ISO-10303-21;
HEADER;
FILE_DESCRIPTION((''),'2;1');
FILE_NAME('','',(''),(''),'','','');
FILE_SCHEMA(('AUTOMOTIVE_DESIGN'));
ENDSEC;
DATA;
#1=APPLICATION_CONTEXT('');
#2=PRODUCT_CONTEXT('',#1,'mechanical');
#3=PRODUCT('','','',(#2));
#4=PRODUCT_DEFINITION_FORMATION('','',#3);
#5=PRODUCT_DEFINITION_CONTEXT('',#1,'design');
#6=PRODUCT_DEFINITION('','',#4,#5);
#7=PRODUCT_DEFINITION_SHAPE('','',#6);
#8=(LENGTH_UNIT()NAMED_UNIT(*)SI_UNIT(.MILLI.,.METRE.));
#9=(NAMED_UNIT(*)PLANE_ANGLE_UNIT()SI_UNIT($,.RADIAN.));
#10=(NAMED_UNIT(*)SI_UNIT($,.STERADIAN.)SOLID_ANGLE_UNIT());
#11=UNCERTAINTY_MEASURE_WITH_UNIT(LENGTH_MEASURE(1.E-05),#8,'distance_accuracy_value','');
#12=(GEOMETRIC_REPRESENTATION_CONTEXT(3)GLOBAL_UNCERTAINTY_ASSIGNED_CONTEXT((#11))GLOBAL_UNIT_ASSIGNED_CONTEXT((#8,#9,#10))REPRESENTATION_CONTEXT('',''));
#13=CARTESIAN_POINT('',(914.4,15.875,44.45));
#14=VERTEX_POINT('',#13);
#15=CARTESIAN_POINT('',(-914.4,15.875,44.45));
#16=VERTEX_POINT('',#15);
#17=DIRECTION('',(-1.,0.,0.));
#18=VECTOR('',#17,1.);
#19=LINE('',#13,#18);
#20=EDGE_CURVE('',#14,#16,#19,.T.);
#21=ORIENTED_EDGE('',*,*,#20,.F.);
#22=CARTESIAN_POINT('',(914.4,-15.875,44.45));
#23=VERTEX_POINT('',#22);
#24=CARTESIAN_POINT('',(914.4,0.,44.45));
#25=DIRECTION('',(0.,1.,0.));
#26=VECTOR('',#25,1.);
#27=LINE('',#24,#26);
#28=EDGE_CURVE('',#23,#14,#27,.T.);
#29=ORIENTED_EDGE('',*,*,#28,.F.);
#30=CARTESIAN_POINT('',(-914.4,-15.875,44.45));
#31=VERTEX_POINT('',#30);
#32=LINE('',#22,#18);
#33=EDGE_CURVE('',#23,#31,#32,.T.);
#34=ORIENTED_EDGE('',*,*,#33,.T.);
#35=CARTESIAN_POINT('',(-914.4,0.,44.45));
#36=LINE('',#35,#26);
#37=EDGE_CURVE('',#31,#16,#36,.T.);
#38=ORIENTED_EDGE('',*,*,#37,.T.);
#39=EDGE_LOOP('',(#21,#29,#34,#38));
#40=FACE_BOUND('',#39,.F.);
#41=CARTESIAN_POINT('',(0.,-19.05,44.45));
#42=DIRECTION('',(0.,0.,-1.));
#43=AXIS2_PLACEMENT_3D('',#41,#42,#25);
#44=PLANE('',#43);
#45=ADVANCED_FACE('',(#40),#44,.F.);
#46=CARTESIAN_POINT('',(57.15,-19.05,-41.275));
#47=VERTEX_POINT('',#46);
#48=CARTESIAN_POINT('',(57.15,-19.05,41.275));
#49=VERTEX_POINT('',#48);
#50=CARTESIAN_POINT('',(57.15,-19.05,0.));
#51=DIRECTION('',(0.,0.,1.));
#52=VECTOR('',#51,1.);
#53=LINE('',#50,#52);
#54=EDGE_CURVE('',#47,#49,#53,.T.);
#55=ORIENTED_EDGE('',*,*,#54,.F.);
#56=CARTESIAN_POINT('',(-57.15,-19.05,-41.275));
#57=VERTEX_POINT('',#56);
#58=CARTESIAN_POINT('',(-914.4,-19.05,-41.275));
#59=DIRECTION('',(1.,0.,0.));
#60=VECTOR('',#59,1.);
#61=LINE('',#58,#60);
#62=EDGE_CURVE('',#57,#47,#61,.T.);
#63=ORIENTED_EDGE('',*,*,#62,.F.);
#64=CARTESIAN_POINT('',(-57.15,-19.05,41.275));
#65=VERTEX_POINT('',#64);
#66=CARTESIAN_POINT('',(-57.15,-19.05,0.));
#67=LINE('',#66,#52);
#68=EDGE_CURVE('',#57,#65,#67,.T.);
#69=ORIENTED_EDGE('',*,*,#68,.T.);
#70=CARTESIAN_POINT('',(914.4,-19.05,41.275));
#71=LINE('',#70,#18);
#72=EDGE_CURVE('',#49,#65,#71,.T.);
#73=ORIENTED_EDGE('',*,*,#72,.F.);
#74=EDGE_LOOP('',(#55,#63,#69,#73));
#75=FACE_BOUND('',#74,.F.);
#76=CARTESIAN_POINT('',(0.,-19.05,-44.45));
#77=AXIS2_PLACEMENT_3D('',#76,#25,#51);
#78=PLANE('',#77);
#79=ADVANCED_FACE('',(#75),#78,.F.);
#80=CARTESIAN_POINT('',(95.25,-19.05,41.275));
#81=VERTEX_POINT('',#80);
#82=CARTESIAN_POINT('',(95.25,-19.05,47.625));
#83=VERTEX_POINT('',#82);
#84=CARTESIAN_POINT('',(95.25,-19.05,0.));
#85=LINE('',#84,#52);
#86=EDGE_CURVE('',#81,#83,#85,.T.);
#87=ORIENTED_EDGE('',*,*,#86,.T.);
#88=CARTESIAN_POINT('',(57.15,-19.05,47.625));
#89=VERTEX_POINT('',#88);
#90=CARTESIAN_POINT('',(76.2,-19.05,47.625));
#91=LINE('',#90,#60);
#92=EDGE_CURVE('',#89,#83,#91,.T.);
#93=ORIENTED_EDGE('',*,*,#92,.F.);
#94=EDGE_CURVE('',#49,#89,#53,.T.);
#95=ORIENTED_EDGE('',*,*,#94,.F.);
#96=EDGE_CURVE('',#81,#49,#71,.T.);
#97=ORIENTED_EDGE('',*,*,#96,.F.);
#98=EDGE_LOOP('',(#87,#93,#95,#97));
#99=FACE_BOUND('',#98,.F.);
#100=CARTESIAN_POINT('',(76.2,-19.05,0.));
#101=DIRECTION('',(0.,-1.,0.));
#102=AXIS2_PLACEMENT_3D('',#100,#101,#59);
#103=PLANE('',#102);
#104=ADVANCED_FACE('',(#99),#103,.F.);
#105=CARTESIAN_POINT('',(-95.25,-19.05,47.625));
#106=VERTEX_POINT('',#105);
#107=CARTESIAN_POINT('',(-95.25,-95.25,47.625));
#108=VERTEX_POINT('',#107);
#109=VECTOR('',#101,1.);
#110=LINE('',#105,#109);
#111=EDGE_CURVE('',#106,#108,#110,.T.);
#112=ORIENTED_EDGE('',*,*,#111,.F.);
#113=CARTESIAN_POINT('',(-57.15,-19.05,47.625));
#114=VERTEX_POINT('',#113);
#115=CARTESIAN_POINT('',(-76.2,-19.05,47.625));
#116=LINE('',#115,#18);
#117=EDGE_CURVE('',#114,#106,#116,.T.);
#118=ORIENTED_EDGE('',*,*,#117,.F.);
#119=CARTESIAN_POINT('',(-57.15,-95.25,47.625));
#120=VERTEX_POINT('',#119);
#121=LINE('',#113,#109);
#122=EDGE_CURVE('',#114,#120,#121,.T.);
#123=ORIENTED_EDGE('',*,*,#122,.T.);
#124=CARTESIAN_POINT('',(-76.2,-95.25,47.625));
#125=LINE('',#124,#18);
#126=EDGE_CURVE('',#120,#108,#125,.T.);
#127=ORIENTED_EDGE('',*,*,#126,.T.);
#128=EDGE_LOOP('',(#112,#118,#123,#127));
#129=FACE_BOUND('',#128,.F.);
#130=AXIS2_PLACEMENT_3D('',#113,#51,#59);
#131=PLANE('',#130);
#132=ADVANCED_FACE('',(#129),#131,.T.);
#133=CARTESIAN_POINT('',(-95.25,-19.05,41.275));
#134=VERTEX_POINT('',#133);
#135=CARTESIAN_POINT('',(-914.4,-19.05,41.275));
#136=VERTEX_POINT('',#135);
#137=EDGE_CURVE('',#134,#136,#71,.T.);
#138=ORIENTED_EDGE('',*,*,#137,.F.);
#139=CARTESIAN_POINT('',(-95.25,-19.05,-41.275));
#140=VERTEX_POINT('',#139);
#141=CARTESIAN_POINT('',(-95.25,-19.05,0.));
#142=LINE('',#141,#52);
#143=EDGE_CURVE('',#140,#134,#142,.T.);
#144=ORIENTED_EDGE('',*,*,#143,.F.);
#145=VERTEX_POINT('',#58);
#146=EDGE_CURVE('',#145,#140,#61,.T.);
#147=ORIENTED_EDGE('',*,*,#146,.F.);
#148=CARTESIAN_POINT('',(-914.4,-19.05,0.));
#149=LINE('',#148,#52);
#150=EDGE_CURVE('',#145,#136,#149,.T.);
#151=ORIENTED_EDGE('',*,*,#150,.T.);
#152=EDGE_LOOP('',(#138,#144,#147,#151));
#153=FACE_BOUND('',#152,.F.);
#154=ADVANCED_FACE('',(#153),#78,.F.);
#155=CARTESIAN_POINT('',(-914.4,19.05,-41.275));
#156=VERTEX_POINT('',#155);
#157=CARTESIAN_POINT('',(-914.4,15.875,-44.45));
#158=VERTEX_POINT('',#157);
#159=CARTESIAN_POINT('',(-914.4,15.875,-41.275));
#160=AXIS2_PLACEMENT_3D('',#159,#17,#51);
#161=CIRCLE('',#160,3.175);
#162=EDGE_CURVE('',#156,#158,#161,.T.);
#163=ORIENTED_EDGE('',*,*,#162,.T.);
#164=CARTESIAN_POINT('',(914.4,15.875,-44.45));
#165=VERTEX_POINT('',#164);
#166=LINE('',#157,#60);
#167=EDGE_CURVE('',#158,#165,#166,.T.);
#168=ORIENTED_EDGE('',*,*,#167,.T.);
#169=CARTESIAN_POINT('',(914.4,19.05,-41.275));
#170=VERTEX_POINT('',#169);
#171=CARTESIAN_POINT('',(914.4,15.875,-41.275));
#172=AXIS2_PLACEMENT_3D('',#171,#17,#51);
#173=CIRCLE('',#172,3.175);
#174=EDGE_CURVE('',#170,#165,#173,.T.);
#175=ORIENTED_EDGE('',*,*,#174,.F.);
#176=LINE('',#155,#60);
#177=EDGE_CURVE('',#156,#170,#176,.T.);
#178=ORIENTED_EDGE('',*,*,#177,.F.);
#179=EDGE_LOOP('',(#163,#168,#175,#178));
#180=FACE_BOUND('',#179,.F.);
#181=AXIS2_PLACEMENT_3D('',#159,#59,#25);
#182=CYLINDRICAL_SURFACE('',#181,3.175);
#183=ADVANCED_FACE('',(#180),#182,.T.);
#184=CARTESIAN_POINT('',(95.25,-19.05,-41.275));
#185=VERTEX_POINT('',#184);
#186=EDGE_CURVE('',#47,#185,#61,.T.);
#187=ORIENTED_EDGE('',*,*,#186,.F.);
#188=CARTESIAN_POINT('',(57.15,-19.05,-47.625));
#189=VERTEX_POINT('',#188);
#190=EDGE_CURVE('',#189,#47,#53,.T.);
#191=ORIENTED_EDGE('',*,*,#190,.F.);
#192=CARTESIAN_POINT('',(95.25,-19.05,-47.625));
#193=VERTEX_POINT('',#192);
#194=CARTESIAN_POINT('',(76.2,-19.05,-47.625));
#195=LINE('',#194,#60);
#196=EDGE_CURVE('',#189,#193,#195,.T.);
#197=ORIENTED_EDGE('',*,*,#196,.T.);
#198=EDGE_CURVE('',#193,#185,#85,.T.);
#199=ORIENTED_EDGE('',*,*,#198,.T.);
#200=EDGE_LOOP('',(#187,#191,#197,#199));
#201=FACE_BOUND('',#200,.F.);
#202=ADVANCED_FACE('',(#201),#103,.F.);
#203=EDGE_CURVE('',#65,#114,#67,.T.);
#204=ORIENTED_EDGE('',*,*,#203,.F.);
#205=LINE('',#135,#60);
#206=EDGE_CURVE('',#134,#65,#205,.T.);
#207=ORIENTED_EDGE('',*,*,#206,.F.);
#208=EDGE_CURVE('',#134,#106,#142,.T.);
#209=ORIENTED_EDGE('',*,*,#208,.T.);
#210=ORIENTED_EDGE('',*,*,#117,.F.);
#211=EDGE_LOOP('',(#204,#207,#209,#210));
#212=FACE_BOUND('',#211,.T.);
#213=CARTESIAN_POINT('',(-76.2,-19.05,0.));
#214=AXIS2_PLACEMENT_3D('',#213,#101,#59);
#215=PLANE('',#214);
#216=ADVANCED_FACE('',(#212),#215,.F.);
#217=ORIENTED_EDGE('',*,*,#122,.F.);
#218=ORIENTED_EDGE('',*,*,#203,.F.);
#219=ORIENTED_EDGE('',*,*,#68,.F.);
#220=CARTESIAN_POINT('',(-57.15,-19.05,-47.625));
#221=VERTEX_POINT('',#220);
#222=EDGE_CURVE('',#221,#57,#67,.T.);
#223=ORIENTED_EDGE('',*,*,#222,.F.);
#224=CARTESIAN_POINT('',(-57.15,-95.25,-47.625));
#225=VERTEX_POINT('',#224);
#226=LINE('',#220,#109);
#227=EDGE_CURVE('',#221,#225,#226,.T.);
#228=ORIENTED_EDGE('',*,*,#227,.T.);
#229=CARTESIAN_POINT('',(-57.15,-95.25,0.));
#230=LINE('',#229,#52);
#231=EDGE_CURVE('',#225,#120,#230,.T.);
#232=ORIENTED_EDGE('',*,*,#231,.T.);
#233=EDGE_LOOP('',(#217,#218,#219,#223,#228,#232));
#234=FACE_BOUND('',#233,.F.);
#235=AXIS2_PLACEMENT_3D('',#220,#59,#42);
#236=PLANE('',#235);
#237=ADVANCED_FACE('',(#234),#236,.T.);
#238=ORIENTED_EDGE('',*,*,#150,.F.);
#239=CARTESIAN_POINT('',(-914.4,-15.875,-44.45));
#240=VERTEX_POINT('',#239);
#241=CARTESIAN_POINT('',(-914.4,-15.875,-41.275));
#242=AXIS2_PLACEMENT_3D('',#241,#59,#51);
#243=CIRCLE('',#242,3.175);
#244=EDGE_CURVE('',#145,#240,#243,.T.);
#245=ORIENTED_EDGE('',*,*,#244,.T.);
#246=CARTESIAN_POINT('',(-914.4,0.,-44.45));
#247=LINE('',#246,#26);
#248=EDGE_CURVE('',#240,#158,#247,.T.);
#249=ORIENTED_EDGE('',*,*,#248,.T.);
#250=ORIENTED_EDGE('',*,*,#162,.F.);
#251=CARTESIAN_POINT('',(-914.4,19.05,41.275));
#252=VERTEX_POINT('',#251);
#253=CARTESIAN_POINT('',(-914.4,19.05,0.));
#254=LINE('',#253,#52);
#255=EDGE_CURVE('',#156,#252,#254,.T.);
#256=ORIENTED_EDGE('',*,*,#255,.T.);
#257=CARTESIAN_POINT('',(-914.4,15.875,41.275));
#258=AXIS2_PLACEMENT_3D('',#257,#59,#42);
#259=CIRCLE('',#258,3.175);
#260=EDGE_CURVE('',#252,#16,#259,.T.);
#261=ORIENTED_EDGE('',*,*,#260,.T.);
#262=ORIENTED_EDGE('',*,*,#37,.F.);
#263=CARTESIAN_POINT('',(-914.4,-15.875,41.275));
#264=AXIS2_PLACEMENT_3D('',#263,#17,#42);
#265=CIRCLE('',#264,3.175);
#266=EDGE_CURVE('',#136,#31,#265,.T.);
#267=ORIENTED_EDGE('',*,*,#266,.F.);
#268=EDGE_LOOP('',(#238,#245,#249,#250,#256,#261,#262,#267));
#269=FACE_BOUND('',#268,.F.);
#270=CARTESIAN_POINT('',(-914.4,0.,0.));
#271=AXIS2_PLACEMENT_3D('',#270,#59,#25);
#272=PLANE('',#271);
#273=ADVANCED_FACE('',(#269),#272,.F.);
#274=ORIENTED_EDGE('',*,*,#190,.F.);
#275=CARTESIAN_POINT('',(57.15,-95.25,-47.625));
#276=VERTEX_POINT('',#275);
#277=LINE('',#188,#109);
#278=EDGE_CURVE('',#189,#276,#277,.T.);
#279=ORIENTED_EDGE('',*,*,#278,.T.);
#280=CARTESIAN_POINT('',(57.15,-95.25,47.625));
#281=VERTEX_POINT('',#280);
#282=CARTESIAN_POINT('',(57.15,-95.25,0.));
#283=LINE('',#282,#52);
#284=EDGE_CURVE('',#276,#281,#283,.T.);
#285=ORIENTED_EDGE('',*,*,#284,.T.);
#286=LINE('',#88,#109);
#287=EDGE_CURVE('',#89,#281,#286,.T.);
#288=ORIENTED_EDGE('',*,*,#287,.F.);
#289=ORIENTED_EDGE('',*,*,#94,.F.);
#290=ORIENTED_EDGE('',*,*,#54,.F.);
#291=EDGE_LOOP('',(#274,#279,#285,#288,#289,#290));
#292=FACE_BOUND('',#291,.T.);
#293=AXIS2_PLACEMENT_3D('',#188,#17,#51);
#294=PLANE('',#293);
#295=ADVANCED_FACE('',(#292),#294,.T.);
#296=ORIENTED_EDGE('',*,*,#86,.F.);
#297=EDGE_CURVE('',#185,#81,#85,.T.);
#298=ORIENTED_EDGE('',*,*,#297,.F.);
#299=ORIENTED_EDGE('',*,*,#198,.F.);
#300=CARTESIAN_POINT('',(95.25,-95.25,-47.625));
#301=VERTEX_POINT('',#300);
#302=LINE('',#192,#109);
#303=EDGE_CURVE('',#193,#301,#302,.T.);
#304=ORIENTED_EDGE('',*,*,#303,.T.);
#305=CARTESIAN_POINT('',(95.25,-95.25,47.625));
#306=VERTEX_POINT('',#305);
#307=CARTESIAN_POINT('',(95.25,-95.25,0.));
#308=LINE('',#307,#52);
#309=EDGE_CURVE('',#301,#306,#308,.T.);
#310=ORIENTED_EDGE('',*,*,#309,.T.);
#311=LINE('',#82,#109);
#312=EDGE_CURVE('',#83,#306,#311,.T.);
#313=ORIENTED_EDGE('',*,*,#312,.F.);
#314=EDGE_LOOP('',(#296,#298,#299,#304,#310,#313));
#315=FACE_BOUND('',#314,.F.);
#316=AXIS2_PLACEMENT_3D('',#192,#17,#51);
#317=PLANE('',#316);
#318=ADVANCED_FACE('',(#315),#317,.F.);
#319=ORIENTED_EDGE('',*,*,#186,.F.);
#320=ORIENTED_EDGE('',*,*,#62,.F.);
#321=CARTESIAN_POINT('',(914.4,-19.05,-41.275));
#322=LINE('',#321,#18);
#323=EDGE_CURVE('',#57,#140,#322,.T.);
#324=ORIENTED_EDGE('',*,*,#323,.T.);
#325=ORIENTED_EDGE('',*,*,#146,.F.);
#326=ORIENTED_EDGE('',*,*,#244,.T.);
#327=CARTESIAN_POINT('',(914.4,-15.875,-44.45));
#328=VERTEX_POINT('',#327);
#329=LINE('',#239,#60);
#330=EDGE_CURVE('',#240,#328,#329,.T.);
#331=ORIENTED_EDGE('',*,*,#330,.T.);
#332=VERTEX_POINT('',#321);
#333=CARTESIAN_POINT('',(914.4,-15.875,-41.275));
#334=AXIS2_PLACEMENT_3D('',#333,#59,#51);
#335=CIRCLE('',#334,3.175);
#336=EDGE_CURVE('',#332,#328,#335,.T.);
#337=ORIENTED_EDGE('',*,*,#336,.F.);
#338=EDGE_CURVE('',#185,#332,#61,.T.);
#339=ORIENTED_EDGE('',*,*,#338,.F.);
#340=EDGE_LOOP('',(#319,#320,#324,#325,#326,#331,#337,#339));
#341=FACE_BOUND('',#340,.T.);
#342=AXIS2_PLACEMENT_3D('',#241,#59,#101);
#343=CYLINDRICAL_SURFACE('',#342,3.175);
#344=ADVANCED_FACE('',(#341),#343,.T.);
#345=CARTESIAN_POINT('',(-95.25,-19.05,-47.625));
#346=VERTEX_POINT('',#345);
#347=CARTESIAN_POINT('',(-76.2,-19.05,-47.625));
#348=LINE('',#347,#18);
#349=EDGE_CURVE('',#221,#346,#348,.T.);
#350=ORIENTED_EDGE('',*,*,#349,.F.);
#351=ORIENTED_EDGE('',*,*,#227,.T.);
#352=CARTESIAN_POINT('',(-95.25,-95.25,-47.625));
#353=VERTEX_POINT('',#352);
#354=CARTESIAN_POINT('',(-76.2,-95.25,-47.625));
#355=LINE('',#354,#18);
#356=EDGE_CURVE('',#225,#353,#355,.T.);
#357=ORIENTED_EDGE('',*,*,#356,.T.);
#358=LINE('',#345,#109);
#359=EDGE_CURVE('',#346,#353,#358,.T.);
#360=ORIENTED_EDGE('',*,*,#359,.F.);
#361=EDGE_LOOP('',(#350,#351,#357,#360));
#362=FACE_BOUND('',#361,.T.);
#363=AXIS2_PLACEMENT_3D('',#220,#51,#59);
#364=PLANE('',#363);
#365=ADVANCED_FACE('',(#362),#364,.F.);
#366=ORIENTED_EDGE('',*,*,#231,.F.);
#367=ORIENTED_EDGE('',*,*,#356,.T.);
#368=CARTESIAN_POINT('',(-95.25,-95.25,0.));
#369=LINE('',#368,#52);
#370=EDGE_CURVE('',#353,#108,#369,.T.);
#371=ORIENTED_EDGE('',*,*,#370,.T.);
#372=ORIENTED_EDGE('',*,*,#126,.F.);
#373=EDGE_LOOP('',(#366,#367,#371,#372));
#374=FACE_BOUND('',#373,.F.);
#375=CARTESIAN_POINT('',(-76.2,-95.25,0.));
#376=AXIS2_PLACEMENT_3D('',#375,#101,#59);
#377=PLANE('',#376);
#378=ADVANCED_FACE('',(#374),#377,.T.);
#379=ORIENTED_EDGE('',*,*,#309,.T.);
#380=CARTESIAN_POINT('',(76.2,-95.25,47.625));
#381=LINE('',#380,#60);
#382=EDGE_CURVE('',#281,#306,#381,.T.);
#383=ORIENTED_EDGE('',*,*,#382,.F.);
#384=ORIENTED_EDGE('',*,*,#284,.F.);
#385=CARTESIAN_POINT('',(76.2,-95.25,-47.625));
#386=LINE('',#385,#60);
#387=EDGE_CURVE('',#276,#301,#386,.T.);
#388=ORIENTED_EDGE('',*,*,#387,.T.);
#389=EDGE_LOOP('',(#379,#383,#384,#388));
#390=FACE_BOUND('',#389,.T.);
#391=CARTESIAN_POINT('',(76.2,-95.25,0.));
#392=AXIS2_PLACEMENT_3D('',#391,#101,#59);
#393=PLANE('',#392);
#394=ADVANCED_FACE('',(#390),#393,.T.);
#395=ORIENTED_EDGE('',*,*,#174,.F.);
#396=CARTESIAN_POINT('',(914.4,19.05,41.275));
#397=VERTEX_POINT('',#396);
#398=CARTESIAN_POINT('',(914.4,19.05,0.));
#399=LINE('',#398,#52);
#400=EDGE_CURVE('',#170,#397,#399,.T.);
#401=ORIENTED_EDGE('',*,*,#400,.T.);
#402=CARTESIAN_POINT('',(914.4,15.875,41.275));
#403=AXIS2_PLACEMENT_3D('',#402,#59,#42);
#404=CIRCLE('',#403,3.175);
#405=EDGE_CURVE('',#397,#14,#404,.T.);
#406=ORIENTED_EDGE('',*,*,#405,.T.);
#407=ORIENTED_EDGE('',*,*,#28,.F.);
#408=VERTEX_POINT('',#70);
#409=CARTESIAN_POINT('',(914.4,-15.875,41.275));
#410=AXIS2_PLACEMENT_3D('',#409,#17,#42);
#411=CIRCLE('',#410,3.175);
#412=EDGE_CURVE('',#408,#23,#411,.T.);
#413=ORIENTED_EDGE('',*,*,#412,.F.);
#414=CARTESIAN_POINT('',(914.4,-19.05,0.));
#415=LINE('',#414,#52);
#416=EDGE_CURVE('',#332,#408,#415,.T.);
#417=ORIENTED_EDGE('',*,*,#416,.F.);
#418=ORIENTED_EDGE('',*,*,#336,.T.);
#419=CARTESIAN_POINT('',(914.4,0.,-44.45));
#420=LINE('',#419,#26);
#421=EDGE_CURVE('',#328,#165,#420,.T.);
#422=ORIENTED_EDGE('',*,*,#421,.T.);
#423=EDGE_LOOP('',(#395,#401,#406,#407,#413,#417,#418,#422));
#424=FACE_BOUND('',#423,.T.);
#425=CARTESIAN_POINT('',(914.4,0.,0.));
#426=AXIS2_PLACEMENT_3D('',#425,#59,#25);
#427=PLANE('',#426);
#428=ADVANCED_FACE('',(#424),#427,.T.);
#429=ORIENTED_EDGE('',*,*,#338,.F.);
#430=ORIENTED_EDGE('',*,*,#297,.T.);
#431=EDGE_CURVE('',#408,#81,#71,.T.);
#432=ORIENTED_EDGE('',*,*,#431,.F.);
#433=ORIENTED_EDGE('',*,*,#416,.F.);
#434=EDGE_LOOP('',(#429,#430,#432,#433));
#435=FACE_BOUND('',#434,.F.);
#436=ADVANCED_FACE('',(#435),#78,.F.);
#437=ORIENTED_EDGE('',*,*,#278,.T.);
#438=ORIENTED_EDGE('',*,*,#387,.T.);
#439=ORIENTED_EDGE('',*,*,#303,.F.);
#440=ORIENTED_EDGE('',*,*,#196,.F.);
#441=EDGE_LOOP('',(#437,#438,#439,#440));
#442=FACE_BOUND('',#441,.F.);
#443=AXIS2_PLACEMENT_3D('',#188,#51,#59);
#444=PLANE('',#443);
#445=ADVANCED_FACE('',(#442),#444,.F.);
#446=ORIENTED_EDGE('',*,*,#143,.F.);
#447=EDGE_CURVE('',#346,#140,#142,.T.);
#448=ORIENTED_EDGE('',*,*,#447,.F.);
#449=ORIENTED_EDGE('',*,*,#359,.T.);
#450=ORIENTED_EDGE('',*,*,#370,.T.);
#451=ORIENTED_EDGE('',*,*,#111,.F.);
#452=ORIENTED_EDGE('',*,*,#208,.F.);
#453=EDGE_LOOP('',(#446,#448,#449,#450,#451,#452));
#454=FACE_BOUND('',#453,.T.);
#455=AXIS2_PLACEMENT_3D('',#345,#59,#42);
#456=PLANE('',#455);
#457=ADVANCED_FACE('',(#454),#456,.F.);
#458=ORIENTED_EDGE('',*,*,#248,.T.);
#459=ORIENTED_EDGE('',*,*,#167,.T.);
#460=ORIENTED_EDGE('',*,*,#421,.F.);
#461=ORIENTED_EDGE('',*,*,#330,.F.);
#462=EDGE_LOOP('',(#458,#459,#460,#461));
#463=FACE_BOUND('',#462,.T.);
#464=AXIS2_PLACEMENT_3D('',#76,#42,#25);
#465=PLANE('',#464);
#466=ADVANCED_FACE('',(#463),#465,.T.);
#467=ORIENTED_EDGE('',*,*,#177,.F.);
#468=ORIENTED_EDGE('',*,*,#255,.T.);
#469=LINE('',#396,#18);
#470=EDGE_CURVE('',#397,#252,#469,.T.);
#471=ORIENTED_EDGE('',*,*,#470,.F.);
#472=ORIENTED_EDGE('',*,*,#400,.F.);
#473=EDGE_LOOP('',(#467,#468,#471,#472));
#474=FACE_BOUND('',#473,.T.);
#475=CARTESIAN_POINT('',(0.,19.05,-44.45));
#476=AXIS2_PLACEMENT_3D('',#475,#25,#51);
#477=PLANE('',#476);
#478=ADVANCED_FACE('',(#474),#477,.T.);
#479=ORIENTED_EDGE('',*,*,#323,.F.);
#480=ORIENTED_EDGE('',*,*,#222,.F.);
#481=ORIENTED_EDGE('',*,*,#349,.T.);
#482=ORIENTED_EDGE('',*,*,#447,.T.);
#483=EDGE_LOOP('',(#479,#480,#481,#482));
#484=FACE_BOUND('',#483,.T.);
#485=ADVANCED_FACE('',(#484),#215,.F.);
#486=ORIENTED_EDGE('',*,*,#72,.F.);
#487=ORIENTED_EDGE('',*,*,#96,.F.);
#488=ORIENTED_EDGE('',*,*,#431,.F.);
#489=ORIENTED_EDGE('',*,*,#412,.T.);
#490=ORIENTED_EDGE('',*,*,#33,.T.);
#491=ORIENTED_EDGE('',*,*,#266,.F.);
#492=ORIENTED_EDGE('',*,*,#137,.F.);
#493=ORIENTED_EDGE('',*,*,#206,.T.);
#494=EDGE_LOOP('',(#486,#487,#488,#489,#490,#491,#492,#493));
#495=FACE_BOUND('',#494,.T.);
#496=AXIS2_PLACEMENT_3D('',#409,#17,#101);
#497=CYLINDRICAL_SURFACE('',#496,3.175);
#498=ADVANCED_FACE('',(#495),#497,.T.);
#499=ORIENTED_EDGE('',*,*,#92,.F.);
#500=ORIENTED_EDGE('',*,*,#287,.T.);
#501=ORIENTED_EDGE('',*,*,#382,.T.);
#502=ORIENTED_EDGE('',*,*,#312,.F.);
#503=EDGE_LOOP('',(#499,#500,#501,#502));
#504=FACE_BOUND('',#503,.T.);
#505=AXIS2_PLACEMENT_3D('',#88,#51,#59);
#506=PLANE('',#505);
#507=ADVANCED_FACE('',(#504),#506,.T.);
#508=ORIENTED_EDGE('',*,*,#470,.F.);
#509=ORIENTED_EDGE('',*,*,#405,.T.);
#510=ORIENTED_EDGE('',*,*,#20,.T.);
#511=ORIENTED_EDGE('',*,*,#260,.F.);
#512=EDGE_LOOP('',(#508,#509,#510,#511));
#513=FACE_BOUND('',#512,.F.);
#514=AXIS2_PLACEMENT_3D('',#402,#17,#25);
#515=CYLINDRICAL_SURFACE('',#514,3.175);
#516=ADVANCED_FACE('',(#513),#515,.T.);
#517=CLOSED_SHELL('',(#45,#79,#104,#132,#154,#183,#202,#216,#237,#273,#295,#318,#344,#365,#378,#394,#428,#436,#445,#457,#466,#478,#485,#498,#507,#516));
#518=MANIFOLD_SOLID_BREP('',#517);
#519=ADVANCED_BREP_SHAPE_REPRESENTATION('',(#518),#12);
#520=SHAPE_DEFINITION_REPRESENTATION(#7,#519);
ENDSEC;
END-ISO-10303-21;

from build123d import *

# Parameters (mm, degrees)
F0_W     = 38.1
F0_H     = 88.9
F1_DEPTH = 914.4
F2_R     = 3.175
F4_W     = 38.1
F4_H     = 95.25
F5_DEPTH = 76.2


with BuildPart() as f1:
    # F0 (on Right) → F1 (new body, symmetric)
    with BuildSketch(Plane.YZ):
        Rectangle(F0_W, F0_H)
    extrude(amount=F1_DEPTH, both=True)

    # F2
    f2_edges = [f1.edges().sort_by_distance(p)[0] for p in [
        (0, -19.05, 44.45),
        (0, 19.05, 44.45),
        (0, -19.05, -44.45),
        (0, 19.05, -44.45),
    ]]
    fillet(f2_edges, radius=F2_R)

    # F4 (on face) → F5 (join)
    with BuildSketch(Plane.XZ.offset(19.05)):
        with Locations((76.2, 0)):
            Rectangle(F4_W, F4_H)
    extrude(amount=F5_DEPTH)

    # F6: F1 across plane


with BuildPart() as f1_1:
    add(f1.part)
    add(f1.part.mirror(Plane.YZ))


solid = f1_1.part
